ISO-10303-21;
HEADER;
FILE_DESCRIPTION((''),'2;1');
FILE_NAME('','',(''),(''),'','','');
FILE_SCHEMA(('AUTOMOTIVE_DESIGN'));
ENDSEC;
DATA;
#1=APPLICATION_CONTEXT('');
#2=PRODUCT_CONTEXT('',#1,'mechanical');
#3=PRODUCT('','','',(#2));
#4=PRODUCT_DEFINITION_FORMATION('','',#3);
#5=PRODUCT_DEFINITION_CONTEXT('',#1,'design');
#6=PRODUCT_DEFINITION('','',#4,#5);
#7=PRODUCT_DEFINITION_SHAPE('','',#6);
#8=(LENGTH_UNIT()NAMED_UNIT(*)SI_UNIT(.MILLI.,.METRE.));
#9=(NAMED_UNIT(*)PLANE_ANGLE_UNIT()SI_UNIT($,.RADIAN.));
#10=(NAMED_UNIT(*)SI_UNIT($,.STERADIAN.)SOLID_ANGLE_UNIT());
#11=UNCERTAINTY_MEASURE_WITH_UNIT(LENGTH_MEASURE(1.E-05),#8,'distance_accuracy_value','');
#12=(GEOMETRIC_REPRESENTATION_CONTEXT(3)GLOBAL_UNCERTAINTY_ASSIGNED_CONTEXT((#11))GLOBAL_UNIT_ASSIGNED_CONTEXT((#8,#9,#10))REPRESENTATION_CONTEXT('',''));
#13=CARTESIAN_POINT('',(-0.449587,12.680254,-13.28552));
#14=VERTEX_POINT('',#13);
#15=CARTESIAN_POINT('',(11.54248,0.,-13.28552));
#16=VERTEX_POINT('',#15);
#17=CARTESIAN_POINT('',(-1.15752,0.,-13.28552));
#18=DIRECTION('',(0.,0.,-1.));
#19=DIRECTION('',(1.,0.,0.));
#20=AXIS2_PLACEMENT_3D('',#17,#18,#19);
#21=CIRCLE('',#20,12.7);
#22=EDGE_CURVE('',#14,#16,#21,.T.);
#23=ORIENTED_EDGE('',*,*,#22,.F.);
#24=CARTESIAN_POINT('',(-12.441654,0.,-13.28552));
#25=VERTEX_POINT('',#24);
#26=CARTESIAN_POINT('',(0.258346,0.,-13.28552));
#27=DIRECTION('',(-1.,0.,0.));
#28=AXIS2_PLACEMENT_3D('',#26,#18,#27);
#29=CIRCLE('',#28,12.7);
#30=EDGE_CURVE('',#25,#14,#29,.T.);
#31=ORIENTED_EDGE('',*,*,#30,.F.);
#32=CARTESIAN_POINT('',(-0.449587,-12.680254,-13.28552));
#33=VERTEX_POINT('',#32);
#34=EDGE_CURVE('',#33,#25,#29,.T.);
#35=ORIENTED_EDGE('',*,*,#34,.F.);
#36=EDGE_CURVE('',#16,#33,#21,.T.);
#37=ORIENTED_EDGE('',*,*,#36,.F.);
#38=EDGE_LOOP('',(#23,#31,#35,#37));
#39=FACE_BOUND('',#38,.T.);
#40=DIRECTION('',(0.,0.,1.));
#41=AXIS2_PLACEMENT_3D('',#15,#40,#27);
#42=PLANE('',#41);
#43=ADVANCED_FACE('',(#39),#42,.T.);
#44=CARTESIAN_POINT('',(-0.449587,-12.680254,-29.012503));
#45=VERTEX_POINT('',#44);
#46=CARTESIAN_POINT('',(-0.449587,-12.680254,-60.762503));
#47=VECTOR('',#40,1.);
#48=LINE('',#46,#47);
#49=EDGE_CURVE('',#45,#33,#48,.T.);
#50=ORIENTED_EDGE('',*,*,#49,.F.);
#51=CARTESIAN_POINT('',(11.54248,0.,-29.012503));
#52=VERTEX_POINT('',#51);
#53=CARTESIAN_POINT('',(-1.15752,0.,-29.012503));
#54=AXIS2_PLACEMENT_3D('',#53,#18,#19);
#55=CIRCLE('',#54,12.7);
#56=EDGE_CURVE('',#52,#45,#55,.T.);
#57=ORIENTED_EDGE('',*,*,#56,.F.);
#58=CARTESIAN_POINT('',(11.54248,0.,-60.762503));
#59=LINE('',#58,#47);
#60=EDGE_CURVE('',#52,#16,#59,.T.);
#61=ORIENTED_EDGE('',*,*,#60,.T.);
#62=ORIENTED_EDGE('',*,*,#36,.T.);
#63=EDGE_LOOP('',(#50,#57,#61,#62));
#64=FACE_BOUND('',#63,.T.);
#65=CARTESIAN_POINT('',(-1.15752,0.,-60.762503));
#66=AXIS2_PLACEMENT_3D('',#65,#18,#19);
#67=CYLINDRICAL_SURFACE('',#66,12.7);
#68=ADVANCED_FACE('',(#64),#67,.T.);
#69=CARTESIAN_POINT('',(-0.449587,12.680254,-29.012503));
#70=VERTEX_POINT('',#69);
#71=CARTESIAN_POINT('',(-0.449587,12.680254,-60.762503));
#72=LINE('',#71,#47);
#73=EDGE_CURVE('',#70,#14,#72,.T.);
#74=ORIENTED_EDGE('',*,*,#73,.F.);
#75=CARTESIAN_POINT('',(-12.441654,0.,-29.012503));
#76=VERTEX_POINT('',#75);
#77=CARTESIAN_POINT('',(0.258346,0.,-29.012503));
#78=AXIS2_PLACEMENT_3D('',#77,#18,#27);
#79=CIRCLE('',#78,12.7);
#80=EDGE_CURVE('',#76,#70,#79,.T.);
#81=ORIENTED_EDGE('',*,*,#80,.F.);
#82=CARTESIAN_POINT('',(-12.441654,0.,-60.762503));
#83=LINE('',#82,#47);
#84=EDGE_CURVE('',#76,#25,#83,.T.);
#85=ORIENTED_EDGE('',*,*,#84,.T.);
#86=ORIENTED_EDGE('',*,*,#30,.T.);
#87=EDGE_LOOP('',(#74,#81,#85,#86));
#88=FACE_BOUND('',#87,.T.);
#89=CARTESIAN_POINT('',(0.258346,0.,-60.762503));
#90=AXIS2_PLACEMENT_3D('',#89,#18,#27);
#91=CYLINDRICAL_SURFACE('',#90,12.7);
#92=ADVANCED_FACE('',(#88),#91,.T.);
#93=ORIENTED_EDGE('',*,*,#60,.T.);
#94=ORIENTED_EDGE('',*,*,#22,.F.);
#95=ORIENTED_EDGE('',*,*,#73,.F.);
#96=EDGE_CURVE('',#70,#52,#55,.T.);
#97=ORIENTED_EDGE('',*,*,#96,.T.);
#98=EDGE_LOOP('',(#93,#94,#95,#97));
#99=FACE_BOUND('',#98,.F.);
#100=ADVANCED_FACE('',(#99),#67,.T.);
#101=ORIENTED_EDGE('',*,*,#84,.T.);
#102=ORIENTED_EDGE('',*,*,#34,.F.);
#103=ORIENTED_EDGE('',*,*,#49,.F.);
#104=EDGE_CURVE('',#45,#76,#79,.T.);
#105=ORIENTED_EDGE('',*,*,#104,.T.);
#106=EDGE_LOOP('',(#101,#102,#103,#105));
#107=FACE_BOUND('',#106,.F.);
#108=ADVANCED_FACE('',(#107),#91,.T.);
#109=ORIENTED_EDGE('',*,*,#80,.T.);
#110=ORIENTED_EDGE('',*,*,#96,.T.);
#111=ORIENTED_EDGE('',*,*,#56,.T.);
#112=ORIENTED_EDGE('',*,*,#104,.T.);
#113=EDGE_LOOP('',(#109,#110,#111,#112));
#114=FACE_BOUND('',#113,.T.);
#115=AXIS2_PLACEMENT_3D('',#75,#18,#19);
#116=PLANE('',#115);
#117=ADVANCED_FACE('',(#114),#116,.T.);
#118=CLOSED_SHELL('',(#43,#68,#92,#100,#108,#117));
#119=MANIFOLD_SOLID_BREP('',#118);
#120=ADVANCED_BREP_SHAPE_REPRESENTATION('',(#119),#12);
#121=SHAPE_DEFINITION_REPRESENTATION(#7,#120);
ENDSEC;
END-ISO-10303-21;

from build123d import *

# Parameters (mm, degrees)
F1_DEPTH    = 12.7
F2_T1_DEPTH = 79.2269835472


# Not quite as in the source:
# - a fillet or chamfer that OpenCascade refuses, or shapes differently, is made with other operations: its cross-section is extruded or revolved along the edge and cut away or added


with BuildPart() as f1:
    # F0 (on Front) → F1 (new body, symmetric)
    with BuildSketch(Plane.XZ):
        with BuildLine():
            Line((-11.0308257863, -15.9663576633), (-11.1952358857, -13.2855195552))
            Line((-11.1952358857, -13.2855195552), (-12.4416537583, -13.2855195552))
            Line((-12.4416537583, -13.2855195552), (-12.4416537583, -29.0125031024))
            Line((-12.4416537583, -29.0125031024), (-10.6407525752, -29.0125031024))
            Line((-10.6407525752, -29.0125031024), (9.3370480284, -29.0125031024))
            add(Edge.make_bspline(
                [(9.3370480284, -29.0125031024), (8.8163951875, -28.4602374533), (6.8919466336, -26.193166533), (5.7612829832, -22.5123911909), (7.5665201167, -17.4691949236), (8.3953980002, -15.9663576633)],
                knots=[0.9445205559, 0.9445205559, 0.9445205559, 0.9445205559, 0.9518406139, 0.9740303489, 0.9871444865, 0.9871444865, 0.9871444865, 0.9871444865], degree=3))
            Line((8.3953980003, -15.9663576633), (-11.0308257863, -15.9663576633))
        make_face()
        with BuildLine():
            Line((11.5424795076, -13.2855195552), (11.0820746049, -13.2855195552))
            Line((11.0820746049, -13.2855195552), (11.0820746049, -15.9663576633))
            Line((11.0820746049, -15.9663576633), (8.3953980003, -15.9663576633))
            add(Edge.make_bspline(
                [(9.3370480284, -29.0125031024), (8.8163951875, -28.4602374533), (6.8919466336, -26.193166533), (5.7612829832, -22.5123911909), (7.5665201167, -17.4691949236), (8.3953980002, -15.9663576633)],
                knots=[0.9445205559, 0.9445205559, 0.9445205559, 0.9445205559, 0.9518406139, 0.9740303489, 0.9871444865, 0.9871444865, 0.9871444865, 0.9871444865], degree=3))
            Line((9.3370480284, -29.0125031024), (10.6407525752, -29.0125031024))
            Line((10.6407525752, -29.0125031024), (11.5424795076, -29.0125031024))
            Line((11.5424795076, -29.0125031024), (11.5424795076, -13.2855195552))
        make_face()
        with BuildLine():
            Line((11.0820746049, -15.9663576633), (11.0820746049, -13.2855195552))
            Line((11.0820746049, -13.2855195552), (10.8409429303, -13.2855195552))
            add(Edge.make_bspline(
                [(8.3953980002, -15.9663576633), (9.1364610409, -14.6227373643), (10.004055933, -13.5752960653), (10.8409429303, -13.2855195552)],
                knots=[0.9871444865, 0.9871444865, 0.9871444865, 0.9871444865, 0.9988692567, 0.9988692567, 0.9988692567, 0.9988692567], degree=3))
            Line((8.3953980003, -15.9663576633), (11.0820746049, -15.9663576633))
        make_face()
        with BuildLine():
            add(Edge.make_bspline(
                [(8.3953980002, -15.9663576633), (9.1364610409, -14.6227373643), (10.004055933, -13.5752960653), (10.8409429303, -13.2855195552)],
                knots=[0.9871444865, 0.9871444865, 0.9871444865, 0.9871444865, 0.9988692567, 0.9988692567, 0.9988692567, 0.9988692567], degree=3))
            Line((10.8409429303, -13.2855195552), (-11.1952358857, -13.2855195552))
            Line((-11.1952358857, -13.2855195552), (-11.0308257863, -15.9663576633))
            Line((-11.0308257863, -15.9663576633), (8.3953980003, -15.9663576633))
        make_face()
    extrude(amount=F1_DEPTH, both=True)

    # F2: fillet of radius 12.7 on 4 edges, made by hand

    # F2_s2 → F2_t1 (cut)
    with BuildSketch(Plane.XY.offset(-60.7625031024)):
        with BuildLine():
            ThreePointArc((11.5424795076, 0), (7.8227356287, 8.9802561211), (-1.1575204924, 12.7))
            Line((-1.1575204924, 12.7), (11.5424795076, 12.7))
            Line((11.5424795076, 12.7), (11.5424795076, 0))
        make_face()
        with BuildLine():
            ThreePointArc((-12.4416537583, 0), (-8.7219098794, 8.9802561211), (0.2583462417, 12.7))
            Line((0.2583462417, 12.7), (-12.4416537583, 12.7))
            Line((-12.4416537583, 12.7), (-12.4416537583, 0))
        make_face()
        with BuildLine():
            ThreePointArc((-12.4416537583, 0), (-8.7219098794, -8.9802561211), (0.2583462417, -12.7))
            Line((0.2583462417, -12.7), (-12.4416537583, -12.7))
            Line((-12.4416537583, -12.7), (-12.4416537583, 0))
        make_face()
        with BuildLine():
            ThreePointArc((11.5424795076, 0), (7.8227356287, -8.9802561211), (-1.1575204924, -12.7))
            Line((-1.1575204924, -12.7), (11.5424795076, -12.7))
            Line((11.5424795076, -12.7), (11.5424795076, 0))
        make_face()
    extrude(amount=F2_T1_DEPTH, mode=Mode.SUBTRACT)


solid = f1.part
